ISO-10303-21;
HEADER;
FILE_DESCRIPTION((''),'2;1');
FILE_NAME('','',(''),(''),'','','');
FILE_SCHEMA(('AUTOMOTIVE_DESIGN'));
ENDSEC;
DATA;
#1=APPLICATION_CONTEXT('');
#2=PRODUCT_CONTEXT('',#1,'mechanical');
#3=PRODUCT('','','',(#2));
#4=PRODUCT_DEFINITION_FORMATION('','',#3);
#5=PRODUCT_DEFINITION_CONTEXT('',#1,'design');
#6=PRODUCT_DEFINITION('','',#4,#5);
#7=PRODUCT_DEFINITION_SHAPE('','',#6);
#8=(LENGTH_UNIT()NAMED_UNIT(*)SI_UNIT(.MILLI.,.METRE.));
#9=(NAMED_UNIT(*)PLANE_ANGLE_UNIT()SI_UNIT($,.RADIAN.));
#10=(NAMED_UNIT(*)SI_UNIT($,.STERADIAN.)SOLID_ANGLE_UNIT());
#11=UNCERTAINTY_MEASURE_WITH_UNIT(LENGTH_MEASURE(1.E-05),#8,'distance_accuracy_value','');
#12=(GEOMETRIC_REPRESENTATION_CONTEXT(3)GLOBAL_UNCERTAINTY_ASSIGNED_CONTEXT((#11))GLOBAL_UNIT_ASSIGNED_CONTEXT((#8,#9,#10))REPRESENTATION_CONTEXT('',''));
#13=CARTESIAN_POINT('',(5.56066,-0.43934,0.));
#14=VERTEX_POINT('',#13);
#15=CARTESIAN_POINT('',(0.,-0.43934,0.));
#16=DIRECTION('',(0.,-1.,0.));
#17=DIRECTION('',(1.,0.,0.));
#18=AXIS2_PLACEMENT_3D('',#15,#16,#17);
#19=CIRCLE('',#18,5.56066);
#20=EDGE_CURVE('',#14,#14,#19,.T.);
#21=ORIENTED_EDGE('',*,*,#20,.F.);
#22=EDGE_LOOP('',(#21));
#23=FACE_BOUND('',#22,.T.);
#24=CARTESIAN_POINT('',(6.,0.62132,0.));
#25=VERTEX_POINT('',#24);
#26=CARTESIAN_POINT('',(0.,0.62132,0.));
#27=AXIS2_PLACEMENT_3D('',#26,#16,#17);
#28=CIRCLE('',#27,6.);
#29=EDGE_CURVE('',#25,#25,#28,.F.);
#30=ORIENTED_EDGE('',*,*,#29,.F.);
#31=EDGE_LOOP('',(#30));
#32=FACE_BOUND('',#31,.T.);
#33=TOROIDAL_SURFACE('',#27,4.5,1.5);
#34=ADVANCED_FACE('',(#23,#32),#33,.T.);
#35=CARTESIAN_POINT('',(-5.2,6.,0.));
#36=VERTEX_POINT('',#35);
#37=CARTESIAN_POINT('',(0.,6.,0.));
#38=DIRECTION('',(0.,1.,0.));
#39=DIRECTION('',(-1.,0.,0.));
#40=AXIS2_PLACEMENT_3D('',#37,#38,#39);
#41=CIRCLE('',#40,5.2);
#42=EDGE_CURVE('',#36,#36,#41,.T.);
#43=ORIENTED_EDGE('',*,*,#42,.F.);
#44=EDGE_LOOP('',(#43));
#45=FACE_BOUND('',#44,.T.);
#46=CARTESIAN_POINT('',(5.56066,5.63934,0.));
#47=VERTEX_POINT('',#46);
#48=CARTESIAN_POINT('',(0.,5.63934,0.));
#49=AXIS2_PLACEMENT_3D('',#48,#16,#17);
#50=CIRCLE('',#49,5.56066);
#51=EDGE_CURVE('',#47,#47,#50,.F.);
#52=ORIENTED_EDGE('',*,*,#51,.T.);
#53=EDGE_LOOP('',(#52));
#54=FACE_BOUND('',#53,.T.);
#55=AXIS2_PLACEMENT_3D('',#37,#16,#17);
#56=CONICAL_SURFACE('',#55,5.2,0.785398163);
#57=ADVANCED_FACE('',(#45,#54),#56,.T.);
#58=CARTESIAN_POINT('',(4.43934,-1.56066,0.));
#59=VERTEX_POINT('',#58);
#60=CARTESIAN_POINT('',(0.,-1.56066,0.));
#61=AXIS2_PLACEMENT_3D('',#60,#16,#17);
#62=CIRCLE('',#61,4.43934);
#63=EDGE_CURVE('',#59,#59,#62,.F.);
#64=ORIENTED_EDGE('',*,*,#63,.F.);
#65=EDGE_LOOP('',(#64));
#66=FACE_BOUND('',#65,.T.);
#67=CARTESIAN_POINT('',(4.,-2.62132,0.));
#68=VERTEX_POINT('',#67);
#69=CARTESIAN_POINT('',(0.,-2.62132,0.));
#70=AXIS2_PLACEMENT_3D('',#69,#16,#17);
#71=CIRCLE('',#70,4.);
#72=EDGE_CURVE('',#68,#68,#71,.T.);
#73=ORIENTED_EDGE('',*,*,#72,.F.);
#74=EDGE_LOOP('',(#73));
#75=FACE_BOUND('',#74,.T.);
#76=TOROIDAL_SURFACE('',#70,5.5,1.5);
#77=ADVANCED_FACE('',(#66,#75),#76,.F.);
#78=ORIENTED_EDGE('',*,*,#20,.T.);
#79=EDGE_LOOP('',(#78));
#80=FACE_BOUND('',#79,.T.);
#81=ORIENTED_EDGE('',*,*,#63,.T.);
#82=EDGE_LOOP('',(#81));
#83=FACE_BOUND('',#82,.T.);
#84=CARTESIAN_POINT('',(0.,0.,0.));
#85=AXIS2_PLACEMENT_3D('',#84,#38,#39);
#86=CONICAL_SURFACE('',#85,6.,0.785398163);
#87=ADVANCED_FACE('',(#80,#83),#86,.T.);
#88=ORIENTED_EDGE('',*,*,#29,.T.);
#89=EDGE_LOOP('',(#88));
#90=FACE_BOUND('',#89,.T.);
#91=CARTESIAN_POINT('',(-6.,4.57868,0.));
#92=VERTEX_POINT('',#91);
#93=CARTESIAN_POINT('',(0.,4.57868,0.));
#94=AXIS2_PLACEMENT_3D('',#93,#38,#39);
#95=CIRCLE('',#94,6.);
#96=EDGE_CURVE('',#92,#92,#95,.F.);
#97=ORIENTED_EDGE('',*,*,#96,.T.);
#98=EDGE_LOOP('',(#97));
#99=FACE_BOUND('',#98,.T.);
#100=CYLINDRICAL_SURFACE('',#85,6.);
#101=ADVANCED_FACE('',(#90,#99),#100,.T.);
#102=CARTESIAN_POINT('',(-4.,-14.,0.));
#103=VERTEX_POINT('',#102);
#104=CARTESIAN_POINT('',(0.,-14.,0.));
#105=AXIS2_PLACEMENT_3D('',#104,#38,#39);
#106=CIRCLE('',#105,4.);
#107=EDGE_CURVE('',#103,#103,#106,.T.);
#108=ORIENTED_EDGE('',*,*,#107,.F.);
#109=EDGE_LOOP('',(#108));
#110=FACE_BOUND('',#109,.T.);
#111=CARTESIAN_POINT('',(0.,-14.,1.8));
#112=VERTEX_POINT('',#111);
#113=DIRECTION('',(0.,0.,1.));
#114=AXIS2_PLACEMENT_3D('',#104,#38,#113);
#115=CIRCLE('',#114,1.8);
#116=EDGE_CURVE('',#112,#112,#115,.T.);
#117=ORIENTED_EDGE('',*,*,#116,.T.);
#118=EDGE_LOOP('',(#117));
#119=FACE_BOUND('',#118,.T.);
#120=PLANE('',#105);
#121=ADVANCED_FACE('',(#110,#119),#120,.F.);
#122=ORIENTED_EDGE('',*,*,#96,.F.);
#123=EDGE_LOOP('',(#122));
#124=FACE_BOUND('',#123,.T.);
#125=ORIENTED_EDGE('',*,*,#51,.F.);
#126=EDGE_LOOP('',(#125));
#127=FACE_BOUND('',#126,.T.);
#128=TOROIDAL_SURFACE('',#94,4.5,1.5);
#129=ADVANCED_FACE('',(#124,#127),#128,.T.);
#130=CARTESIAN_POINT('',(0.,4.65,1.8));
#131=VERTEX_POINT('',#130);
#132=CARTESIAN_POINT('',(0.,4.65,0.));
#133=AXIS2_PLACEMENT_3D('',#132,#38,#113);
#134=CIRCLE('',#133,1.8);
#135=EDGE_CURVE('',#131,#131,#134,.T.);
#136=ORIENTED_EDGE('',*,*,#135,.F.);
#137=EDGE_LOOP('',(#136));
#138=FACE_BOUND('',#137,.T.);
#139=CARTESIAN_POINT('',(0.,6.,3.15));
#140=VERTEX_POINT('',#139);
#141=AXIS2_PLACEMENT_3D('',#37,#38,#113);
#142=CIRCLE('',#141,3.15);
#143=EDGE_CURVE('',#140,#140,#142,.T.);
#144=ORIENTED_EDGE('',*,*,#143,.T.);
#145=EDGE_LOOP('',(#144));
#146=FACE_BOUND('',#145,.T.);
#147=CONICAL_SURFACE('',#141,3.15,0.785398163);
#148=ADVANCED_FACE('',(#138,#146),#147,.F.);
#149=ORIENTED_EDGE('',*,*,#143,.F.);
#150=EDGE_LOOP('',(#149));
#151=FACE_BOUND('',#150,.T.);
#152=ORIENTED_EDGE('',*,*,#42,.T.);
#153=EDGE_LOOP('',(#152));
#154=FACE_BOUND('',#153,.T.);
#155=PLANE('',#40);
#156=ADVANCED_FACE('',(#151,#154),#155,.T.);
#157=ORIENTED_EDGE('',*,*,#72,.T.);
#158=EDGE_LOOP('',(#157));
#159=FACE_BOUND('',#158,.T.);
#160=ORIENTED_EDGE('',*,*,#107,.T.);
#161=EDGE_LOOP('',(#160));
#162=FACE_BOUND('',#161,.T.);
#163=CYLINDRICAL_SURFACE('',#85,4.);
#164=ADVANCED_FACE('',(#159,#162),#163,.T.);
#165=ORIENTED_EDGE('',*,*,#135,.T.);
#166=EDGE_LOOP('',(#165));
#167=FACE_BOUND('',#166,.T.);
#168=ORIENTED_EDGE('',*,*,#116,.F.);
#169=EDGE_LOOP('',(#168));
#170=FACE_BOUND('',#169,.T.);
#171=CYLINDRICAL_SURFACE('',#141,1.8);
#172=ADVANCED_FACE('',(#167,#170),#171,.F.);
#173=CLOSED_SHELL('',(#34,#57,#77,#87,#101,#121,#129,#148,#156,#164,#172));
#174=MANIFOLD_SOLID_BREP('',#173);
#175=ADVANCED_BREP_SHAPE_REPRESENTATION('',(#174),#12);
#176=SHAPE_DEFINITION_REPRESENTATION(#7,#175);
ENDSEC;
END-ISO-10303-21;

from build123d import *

# Parameters (mm, degrees)
SKETCH2_W                                       = 6
SKETCH2_H                                       = 6
SKETCH2_W_2                                     = 4
SKETCH2_H_2                                     = 14
CSK_FOR_M3_FLAT_HEAD_MACHINE_SCREW1_D           = 3.6
CSK_FOR_M3_FLAT_HEAD_MACHINE_SCREW1_CSINK_D     = 6.3
CSK_FOR_M3_FLAT_HEAD_MACHINE_SCREW1_CSINK_ANGLE = 90
CHAMFER1_SIZE                                   = 2
CHAMFER3_SIZE                                   = 0.8


with BuildPart() as part:
    # Sketch2 → Revolve1 (revolve)
    with BuildSketch(Plane.XY, mode=Mode.PRIVATE) as revolve1_sk:
        with Locations((3, 3)):
            Rectangle(SKETCH2_W, SKETCH2_H)
        with Locations((2, -7)):
            Rectangle(SKETCH2_W_2, SKETCH2_H_2)
    revolve(revolve1_sk.sketch.rotate(Axis((0, 0, 0), (0, -1, 0)), 180), axis=Axis((0, 0, 0), (0, -1, 0)))

    # CSK for M3 Flat Head Machine Screw1 (through all)
    with Locations(Plane(origin=(0, 6, 0), x_dir=(1, 0, 0), z_dir=(0, 1, 0))):
        with Locations((0, 0)):
            CounterSinkHole(CSK_FOR_M3_FLAT_HEAD_MACHINE_SCREW1_D / 2, CSK_FOR_M3_FLAT_HEAD_MACHINE_SCREW1_CSINK_D / 2, counter_sink_angle=CSK_FOR_M3_FLAT_HEAD_MACHINE_SCREW1_CSINK_ANGLE)

    # Chamfer1
    chamfer1_edges = [part.edges().sort_by_distance(p)[0] for p in [
        (4, 0, 0),
    ]]
    chamfer(chamfer1_edges, length=CHAMFER1_SIZE - 0.0001)  # a hair under: the kernel refuses the full size

    # Chamfer3
    chamfer3_edges = [part.edges().sort_by_distance(p)[0] for p in [
        (6, 6, 0),
    ]]
    chamfer(chamfer3_edges, length=CHAMFER3_SIZE)

    # Fillet1: read off the stored shape, not the designer's step
    # Fillet1 outline → Fillet1 (revolve, cut)
    with BuildSketch(Plane.XY):
        with BuildLine():
            ThreePointArc((5.560660172, 5.639339828), (5.885819299, 5.152704805), (6, 4.578679656))
            Line((6, 4.578679656), (6, 5.639339828))
            Line((6, 5.639339828), (5.560660172, 5.639339828))
        make_face()
        with BuildLine():
            Line((6, -0.439339828), (6, 0.621320344))
            ThreePointArc((6, 0.621320344), (5.885819299, 0.047295195), (5.560660172, -0.439339828))
            Line((5.560660172, -0.439339828), (6, -0.439339828))
        make_face()
    revolve(axis=Axis((0, 0, 0), (0, 1, 0)), mode=Mode.SUBTRACT)

    # Fillet1 2 outline → Fillet1 2 (revolve)
    with BuildSketch(Plane.XY):
        with BuildLine():
            ThreePointArc((4, -2.621320344), (4.114180701, -2.047295195), (4.439339828, -1.560660172))
            Line((4.439339828, -1.560660172), (4, -1.560660172))
            Line((4, -1.560660172), (4, -2.621320344))
        make_face()
    revolve(axis=Axis((0, 0, 0), (0, 1, 0)))


solid = part.part
